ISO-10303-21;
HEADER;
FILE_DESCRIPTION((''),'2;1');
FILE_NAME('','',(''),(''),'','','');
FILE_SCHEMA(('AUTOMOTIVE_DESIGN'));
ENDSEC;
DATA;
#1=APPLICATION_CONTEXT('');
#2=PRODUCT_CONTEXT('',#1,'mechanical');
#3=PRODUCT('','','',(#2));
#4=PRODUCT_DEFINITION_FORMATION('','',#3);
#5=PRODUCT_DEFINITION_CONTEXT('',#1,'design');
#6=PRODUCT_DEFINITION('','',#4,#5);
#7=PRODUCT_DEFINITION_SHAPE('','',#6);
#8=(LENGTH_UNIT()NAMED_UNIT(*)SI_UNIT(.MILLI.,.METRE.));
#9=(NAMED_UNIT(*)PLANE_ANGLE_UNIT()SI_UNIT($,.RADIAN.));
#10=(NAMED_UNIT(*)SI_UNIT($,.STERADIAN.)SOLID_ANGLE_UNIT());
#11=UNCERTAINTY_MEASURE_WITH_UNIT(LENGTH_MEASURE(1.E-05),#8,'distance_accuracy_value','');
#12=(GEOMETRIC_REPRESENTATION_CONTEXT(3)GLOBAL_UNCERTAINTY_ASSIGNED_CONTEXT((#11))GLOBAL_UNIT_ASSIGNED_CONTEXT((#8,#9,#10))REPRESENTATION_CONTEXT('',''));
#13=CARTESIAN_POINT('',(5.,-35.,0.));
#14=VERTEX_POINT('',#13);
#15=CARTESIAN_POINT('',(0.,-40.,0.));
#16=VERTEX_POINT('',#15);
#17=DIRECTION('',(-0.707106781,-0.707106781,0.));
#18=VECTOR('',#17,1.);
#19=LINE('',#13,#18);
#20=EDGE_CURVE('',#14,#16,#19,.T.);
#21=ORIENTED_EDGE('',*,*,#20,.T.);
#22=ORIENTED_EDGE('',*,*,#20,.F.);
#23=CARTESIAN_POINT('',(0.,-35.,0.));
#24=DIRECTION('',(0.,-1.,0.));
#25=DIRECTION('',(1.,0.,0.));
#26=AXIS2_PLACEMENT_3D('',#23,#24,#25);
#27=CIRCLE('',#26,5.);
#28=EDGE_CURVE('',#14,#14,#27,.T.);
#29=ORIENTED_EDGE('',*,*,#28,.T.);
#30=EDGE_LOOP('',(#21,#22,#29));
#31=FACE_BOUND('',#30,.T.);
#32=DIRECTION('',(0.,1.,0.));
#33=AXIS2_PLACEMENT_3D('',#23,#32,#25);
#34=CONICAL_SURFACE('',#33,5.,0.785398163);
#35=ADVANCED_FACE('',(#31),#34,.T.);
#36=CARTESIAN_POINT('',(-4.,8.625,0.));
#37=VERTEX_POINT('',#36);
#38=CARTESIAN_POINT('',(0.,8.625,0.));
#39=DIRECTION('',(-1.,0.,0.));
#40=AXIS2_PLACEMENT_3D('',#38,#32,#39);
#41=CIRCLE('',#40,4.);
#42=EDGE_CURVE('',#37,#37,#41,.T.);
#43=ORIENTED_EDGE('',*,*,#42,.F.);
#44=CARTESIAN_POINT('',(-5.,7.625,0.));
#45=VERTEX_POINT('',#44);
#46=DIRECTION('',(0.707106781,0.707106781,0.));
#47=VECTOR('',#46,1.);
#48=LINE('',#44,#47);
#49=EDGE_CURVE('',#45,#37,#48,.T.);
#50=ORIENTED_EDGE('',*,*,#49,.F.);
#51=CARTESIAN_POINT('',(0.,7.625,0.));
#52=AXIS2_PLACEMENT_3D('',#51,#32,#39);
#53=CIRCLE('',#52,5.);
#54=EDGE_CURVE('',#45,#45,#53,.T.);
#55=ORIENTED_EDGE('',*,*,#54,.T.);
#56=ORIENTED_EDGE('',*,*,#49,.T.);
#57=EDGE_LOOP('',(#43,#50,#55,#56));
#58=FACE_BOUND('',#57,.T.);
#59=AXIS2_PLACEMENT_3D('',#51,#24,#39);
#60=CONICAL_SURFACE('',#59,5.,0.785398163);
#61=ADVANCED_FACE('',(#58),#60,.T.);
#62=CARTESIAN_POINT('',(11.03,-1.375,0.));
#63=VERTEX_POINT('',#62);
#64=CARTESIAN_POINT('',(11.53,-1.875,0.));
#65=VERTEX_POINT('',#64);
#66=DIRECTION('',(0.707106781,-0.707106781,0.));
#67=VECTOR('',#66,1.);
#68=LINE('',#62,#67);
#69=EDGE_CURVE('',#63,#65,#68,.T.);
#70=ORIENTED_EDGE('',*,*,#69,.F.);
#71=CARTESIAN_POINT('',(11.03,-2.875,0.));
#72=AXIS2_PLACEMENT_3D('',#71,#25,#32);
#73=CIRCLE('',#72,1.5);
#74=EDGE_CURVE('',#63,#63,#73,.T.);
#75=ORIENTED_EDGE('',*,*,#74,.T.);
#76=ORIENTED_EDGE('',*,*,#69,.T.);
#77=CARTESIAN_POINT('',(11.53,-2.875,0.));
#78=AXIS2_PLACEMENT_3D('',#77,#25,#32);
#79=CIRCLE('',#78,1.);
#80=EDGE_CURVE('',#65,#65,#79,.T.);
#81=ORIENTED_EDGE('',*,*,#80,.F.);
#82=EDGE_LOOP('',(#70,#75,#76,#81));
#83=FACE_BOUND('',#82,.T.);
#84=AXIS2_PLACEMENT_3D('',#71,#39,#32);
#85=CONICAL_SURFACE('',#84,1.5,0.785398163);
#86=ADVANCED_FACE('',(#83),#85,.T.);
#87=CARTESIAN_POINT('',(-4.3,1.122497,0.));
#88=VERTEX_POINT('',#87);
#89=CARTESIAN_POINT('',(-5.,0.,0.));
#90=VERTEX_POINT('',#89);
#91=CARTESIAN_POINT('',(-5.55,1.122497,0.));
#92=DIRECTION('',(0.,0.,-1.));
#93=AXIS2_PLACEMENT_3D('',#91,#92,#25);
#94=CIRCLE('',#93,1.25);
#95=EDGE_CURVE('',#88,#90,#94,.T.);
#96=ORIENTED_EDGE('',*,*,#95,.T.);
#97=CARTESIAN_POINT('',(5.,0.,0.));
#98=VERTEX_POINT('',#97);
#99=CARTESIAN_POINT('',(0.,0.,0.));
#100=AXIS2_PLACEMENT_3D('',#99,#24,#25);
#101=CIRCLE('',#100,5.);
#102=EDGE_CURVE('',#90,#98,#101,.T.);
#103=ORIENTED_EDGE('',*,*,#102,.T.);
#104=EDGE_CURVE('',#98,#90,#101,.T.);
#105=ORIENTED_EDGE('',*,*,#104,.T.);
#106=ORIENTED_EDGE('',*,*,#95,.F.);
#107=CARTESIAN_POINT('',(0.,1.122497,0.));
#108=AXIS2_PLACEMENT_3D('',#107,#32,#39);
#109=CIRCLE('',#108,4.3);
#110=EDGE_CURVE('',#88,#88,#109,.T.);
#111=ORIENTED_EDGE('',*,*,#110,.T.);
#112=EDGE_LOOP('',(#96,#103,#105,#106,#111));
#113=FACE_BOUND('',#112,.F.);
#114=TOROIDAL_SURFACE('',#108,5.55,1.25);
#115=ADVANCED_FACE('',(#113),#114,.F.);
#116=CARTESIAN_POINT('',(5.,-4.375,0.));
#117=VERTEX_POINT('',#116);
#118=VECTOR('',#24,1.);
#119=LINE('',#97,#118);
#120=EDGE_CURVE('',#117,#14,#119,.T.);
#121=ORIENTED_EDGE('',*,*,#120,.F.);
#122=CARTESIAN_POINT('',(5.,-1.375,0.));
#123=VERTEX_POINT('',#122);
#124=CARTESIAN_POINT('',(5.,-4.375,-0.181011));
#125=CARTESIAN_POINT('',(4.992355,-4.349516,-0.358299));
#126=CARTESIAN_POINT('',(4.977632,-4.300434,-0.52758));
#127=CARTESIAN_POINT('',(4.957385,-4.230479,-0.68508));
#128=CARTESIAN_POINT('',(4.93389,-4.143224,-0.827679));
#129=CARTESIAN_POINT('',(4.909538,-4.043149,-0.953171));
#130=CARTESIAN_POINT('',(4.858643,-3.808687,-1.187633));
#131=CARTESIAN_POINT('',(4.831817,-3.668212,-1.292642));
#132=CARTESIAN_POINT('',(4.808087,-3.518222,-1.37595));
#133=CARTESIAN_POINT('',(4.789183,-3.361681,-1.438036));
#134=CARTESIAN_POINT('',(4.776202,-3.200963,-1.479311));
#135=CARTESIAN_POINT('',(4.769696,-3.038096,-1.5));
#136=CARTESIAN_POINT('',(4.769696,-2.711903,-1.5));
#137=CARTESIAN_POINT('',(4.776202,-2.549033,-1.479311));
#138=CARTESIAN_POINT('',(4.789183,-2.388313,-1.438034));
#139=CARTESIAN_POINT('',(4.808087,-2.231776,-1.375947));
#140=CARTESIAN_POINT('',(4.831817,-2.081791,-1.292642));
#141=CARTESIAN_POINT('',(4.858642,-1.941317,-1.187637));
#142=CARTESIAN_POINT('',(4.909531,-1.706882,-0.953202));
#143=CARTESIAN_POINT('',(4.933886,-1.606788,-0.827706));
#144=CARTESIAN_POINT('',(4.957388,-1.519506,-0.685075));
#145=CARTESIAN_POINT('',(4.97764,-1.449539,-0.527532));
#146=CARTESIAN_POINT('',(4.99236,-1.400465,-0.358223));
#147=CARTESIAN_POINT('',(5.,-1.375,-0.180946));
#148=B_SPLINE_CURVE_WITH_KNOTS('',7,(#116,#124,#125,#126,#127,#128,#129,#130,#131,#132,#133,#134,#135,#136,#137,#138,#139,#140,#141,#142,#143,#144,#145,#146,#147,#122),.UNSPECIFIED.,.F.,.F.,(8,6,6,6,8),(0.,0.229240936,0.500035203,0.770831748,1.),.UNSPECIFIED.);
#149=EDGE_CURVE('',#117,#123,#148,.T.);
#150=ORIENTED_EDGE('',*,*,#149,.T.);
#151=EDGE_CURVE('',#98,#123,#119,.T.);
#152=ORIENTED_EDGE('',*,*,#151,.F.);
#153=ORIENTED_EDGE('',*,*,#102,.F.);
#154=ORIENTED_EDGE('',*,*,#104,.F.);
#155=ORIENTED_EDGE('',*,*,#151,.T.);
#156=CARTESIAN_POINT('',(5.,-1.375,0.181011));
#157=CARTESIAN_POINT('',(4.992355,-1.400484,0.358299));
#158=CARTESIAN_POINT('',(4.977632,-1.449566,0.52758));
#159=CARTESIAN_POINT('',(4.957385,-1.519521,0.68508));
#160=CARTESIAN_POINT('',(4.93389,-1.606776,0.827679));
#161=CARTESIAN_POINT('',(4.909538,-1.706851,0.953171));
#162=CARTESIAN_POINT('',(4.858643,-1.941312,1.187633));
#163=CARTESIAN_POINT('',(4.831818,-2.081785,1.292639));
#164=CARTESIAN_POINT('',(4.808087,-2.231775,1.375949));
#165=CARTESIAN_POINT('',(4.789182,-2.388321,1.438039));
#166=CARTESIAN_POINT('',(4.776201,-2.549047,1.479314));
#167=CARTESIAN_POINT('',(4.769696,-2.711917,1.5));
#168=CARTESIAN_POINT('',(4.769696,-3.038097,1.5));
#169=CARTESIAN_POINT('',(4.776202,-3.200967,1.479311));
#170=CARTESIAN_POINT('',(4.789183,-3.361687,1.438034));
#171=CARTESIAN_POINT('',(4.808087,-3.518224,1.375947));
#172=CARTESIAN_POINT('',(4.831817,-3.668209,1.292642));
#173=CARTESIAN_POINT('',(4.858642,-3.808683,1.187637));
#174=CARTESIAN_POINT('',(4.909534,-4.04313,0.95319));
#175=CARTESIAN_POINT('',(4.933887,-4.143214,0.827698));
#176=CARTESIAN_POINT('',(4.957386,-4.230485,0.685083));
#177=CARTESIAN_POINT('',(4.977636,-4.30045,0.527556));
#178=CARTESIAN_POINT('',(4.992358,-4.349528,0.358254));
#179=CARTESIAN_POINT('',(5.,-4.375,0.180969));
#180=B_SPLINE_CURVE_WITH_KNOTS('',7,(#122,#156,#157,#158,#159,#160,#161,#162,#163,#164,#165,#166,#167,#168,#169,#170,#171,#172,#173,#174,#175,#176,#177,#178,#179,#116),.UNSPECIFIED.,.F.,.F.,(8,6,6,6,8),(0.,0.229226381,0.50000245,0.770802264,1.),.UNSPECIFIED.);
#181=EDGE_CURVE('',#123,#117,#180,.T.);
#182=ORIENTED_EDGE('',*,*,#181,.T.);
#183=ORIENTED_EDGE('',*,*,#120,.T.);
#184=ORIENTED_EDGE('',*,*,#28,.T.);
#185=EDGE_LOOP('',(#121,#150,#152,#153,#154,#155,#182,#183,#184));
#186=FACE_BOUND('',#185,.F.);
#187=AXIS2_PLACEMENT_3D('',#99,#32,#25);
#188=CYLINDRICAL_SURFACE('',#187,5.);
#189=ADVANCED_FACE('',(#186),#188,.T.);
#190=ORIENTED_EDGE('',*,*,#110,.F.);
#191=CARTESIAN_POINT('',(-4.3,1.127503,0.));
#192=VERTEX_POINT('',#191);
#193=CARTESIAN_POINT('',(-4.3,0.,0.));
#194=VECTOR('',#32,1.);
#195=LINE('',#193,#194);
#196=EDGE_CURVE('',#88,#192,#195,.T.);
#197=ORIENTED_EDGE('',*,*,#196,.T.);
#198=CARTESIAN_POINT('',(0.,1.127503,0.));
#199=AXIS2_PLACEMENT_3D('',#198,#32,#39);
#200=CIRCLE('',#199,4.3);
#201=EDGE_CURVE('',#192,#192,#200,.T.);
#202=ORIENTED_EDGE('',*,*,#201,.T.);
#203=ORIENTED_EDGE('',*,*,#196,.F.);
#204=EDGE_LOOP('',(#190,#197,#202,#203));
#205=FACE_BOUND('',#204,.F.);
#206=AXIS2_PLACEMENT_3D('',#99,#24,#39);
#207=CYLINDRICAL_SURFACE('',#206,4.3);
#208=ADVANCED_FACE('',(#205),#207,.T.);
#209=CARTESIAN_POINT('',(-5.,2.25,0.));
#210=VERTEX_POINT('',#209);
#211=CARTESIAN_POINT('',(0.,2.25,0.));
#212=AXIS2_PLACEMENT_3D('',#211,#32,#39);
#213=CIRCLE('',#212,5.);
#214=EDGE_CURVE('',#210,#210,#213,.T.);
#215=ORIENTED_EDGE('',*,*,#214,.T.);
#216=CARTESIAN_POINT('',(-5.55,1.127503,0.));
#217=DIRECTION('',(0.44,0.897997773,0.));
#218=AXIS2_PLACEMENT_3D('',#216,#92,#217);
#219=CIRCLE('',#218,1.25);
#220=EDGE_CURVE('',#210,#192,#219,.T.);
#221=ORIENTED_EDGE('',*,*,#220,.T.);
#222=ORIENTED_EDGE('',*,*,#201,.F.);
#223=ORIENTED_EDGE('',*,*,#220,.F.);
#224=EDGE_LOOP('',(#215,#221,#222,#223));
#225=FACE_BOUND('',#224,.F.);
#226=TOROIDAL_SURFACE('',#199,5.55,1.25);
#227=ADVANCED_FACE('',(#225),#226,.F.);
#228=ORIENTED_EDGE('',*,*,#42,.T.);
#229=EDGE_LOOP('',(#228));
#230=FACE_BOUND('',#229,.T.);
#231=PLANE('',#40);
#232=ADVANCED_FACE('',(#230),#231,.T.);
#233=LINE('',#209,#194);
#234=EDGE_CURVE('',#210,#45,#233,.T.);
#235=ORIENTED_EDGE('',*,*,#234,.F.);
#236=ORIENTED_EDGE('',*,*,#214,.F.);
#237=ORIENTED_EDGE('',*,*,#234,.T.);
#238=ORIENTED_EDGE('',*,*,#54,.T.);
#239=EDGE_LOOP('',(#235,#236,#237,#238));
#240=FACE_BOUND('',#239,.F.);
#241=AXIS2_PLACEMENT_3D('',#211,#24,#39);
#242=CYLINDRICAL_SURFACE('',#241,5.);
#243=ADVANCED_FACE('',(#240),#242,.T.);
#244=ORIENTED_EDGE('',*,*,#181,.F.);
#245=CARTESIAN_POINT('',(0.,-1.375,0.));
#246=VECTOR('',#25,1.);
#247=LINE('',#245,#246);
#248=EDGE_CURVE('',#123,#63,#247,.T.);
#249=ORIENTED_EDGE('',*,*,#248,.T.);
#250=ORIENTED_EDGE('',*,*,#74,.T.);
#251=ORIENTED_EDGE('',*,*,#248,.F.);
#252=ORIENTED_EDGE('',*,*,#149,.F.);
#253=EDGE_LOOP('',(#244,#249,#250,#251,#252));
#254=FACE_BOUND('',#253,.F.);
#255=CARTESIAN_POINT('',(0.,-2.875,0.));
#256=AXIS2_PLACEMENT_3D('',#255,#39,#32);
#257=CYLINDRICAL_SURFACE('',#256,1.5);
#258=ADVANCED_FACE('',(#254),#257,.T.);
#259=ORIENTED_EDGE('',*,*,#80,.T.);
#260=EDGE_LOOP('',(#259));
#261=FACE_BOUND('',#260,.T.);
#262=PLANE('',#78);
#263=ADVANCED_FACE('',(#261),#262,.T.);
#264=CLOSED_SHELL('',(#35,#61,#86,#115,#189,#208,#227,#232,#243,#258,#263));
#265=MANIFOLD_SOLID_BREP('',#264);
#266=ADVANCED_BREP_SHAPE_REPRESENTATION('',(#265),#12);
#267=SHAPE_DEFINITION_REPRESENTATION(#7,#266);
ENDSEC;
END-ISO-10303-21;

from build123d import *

# Parameters (mm, degrees)
F0_R     = 5
F1_DEPTH = 40
F2_R     = 4.3
F3_DEPTH = 2.25
F4_R     = 5
F5_DEPTH = 6.375
F7_SIZE  = 1
F8_R     = 1.5
F9_DEPTH = 11.53
F10_SIZE = 0.5
F11_SIZE = 5


# Not quite as in the source:
# - a fillet or chamfer that OpenCascade refuses, or shapes differently, is made with other operations: its cross-section is extruded or revolved along the edge and cut away or added


with BuildPart() as f1:
    # F0 (on Front) → F1 (new body)
    with BuildSketch(Plane.XZ):
        Circle(F0_R)
    extrude(amount=F1_DEPTH)

    # F2 (on face) → F3 (join)
    with BuildSketch(Plane(origin=(0, 0, 0), x_dir=(-1, 0, 0), z_dir=(0, 1, 0))):
        Circle(F2_R)
    extrude(amount=F3_DEPTH)

    # F4 (on face) → F5 (join)
    with BuildSketch(Plane(origin=(0, 2.25, 0), x_dir=(-1, 0, 0), z_dir=(0, 1, 0))):
        Circle(F4_R)
    extrude(amount=F5_DEPTH)

    # F6: fillet of radius 1.25 on 3 edges, made by hand

    # F6_s1 → F6_t2 (revolve)
    with BuildSketch(Plane.XY):
        with BuildLine():
            ThreePointArc((-4.3, 1.122497216), (-4.4893398282, 0.4610593883), (-5, 0))
            Line((-5, 0), (-4.3, 0))
            Line((-4.3, 0), (-4.3, 1.122497216))
        make_face()
    revolve(axis=Axis((0, 0, 0), (0, 1, 0)))

    # F6_s3 → F6_t4 (revolve)
    with BuildSketch(Plane.XY):
        with BuildLine():
            ThreePointArc((-5, 2.25), (-4.4893398282, 1.7889406117), (-4.3, 1.127502784))
            Line((-4.3, 1.127502784), (-4.3, 2.25))
            Line((-4.3, 2.25), (-5, 2.25))
        make_face()
    revolve(axis=Axis((0, 2.25, 0), (0, 1, 0)))

    # F7
    f7_edges = [f1.edges().sort_by_distance(p)[0] for p in [
        (5, 8.625, 0),
    ]]
    chamfer(f7_edges, length=F7_SIZE)

    # F8 (on Right) → F9 (join)
    with BuildSketch(Plane.YZ):
        with Locations((-2.875, 0)):
            Circle(F8_R)
    extrude(amount=F9_DEPTH)

    # F10
    f10_edges = [f1.edges().sort_by_distance(p)[0] for p in [
        (11.53, -4.375, 0),
    ]]
    chamfer(f10_edges, length=F10_SIZE)

    # F11
    f11_edges = [f1.edges().sort_by_distance(p)[0] for p in [
        (-5, -40, 0),
    ]]
    chamfer(f11_edges, length=F11_SIZE)


solid = f1.part
